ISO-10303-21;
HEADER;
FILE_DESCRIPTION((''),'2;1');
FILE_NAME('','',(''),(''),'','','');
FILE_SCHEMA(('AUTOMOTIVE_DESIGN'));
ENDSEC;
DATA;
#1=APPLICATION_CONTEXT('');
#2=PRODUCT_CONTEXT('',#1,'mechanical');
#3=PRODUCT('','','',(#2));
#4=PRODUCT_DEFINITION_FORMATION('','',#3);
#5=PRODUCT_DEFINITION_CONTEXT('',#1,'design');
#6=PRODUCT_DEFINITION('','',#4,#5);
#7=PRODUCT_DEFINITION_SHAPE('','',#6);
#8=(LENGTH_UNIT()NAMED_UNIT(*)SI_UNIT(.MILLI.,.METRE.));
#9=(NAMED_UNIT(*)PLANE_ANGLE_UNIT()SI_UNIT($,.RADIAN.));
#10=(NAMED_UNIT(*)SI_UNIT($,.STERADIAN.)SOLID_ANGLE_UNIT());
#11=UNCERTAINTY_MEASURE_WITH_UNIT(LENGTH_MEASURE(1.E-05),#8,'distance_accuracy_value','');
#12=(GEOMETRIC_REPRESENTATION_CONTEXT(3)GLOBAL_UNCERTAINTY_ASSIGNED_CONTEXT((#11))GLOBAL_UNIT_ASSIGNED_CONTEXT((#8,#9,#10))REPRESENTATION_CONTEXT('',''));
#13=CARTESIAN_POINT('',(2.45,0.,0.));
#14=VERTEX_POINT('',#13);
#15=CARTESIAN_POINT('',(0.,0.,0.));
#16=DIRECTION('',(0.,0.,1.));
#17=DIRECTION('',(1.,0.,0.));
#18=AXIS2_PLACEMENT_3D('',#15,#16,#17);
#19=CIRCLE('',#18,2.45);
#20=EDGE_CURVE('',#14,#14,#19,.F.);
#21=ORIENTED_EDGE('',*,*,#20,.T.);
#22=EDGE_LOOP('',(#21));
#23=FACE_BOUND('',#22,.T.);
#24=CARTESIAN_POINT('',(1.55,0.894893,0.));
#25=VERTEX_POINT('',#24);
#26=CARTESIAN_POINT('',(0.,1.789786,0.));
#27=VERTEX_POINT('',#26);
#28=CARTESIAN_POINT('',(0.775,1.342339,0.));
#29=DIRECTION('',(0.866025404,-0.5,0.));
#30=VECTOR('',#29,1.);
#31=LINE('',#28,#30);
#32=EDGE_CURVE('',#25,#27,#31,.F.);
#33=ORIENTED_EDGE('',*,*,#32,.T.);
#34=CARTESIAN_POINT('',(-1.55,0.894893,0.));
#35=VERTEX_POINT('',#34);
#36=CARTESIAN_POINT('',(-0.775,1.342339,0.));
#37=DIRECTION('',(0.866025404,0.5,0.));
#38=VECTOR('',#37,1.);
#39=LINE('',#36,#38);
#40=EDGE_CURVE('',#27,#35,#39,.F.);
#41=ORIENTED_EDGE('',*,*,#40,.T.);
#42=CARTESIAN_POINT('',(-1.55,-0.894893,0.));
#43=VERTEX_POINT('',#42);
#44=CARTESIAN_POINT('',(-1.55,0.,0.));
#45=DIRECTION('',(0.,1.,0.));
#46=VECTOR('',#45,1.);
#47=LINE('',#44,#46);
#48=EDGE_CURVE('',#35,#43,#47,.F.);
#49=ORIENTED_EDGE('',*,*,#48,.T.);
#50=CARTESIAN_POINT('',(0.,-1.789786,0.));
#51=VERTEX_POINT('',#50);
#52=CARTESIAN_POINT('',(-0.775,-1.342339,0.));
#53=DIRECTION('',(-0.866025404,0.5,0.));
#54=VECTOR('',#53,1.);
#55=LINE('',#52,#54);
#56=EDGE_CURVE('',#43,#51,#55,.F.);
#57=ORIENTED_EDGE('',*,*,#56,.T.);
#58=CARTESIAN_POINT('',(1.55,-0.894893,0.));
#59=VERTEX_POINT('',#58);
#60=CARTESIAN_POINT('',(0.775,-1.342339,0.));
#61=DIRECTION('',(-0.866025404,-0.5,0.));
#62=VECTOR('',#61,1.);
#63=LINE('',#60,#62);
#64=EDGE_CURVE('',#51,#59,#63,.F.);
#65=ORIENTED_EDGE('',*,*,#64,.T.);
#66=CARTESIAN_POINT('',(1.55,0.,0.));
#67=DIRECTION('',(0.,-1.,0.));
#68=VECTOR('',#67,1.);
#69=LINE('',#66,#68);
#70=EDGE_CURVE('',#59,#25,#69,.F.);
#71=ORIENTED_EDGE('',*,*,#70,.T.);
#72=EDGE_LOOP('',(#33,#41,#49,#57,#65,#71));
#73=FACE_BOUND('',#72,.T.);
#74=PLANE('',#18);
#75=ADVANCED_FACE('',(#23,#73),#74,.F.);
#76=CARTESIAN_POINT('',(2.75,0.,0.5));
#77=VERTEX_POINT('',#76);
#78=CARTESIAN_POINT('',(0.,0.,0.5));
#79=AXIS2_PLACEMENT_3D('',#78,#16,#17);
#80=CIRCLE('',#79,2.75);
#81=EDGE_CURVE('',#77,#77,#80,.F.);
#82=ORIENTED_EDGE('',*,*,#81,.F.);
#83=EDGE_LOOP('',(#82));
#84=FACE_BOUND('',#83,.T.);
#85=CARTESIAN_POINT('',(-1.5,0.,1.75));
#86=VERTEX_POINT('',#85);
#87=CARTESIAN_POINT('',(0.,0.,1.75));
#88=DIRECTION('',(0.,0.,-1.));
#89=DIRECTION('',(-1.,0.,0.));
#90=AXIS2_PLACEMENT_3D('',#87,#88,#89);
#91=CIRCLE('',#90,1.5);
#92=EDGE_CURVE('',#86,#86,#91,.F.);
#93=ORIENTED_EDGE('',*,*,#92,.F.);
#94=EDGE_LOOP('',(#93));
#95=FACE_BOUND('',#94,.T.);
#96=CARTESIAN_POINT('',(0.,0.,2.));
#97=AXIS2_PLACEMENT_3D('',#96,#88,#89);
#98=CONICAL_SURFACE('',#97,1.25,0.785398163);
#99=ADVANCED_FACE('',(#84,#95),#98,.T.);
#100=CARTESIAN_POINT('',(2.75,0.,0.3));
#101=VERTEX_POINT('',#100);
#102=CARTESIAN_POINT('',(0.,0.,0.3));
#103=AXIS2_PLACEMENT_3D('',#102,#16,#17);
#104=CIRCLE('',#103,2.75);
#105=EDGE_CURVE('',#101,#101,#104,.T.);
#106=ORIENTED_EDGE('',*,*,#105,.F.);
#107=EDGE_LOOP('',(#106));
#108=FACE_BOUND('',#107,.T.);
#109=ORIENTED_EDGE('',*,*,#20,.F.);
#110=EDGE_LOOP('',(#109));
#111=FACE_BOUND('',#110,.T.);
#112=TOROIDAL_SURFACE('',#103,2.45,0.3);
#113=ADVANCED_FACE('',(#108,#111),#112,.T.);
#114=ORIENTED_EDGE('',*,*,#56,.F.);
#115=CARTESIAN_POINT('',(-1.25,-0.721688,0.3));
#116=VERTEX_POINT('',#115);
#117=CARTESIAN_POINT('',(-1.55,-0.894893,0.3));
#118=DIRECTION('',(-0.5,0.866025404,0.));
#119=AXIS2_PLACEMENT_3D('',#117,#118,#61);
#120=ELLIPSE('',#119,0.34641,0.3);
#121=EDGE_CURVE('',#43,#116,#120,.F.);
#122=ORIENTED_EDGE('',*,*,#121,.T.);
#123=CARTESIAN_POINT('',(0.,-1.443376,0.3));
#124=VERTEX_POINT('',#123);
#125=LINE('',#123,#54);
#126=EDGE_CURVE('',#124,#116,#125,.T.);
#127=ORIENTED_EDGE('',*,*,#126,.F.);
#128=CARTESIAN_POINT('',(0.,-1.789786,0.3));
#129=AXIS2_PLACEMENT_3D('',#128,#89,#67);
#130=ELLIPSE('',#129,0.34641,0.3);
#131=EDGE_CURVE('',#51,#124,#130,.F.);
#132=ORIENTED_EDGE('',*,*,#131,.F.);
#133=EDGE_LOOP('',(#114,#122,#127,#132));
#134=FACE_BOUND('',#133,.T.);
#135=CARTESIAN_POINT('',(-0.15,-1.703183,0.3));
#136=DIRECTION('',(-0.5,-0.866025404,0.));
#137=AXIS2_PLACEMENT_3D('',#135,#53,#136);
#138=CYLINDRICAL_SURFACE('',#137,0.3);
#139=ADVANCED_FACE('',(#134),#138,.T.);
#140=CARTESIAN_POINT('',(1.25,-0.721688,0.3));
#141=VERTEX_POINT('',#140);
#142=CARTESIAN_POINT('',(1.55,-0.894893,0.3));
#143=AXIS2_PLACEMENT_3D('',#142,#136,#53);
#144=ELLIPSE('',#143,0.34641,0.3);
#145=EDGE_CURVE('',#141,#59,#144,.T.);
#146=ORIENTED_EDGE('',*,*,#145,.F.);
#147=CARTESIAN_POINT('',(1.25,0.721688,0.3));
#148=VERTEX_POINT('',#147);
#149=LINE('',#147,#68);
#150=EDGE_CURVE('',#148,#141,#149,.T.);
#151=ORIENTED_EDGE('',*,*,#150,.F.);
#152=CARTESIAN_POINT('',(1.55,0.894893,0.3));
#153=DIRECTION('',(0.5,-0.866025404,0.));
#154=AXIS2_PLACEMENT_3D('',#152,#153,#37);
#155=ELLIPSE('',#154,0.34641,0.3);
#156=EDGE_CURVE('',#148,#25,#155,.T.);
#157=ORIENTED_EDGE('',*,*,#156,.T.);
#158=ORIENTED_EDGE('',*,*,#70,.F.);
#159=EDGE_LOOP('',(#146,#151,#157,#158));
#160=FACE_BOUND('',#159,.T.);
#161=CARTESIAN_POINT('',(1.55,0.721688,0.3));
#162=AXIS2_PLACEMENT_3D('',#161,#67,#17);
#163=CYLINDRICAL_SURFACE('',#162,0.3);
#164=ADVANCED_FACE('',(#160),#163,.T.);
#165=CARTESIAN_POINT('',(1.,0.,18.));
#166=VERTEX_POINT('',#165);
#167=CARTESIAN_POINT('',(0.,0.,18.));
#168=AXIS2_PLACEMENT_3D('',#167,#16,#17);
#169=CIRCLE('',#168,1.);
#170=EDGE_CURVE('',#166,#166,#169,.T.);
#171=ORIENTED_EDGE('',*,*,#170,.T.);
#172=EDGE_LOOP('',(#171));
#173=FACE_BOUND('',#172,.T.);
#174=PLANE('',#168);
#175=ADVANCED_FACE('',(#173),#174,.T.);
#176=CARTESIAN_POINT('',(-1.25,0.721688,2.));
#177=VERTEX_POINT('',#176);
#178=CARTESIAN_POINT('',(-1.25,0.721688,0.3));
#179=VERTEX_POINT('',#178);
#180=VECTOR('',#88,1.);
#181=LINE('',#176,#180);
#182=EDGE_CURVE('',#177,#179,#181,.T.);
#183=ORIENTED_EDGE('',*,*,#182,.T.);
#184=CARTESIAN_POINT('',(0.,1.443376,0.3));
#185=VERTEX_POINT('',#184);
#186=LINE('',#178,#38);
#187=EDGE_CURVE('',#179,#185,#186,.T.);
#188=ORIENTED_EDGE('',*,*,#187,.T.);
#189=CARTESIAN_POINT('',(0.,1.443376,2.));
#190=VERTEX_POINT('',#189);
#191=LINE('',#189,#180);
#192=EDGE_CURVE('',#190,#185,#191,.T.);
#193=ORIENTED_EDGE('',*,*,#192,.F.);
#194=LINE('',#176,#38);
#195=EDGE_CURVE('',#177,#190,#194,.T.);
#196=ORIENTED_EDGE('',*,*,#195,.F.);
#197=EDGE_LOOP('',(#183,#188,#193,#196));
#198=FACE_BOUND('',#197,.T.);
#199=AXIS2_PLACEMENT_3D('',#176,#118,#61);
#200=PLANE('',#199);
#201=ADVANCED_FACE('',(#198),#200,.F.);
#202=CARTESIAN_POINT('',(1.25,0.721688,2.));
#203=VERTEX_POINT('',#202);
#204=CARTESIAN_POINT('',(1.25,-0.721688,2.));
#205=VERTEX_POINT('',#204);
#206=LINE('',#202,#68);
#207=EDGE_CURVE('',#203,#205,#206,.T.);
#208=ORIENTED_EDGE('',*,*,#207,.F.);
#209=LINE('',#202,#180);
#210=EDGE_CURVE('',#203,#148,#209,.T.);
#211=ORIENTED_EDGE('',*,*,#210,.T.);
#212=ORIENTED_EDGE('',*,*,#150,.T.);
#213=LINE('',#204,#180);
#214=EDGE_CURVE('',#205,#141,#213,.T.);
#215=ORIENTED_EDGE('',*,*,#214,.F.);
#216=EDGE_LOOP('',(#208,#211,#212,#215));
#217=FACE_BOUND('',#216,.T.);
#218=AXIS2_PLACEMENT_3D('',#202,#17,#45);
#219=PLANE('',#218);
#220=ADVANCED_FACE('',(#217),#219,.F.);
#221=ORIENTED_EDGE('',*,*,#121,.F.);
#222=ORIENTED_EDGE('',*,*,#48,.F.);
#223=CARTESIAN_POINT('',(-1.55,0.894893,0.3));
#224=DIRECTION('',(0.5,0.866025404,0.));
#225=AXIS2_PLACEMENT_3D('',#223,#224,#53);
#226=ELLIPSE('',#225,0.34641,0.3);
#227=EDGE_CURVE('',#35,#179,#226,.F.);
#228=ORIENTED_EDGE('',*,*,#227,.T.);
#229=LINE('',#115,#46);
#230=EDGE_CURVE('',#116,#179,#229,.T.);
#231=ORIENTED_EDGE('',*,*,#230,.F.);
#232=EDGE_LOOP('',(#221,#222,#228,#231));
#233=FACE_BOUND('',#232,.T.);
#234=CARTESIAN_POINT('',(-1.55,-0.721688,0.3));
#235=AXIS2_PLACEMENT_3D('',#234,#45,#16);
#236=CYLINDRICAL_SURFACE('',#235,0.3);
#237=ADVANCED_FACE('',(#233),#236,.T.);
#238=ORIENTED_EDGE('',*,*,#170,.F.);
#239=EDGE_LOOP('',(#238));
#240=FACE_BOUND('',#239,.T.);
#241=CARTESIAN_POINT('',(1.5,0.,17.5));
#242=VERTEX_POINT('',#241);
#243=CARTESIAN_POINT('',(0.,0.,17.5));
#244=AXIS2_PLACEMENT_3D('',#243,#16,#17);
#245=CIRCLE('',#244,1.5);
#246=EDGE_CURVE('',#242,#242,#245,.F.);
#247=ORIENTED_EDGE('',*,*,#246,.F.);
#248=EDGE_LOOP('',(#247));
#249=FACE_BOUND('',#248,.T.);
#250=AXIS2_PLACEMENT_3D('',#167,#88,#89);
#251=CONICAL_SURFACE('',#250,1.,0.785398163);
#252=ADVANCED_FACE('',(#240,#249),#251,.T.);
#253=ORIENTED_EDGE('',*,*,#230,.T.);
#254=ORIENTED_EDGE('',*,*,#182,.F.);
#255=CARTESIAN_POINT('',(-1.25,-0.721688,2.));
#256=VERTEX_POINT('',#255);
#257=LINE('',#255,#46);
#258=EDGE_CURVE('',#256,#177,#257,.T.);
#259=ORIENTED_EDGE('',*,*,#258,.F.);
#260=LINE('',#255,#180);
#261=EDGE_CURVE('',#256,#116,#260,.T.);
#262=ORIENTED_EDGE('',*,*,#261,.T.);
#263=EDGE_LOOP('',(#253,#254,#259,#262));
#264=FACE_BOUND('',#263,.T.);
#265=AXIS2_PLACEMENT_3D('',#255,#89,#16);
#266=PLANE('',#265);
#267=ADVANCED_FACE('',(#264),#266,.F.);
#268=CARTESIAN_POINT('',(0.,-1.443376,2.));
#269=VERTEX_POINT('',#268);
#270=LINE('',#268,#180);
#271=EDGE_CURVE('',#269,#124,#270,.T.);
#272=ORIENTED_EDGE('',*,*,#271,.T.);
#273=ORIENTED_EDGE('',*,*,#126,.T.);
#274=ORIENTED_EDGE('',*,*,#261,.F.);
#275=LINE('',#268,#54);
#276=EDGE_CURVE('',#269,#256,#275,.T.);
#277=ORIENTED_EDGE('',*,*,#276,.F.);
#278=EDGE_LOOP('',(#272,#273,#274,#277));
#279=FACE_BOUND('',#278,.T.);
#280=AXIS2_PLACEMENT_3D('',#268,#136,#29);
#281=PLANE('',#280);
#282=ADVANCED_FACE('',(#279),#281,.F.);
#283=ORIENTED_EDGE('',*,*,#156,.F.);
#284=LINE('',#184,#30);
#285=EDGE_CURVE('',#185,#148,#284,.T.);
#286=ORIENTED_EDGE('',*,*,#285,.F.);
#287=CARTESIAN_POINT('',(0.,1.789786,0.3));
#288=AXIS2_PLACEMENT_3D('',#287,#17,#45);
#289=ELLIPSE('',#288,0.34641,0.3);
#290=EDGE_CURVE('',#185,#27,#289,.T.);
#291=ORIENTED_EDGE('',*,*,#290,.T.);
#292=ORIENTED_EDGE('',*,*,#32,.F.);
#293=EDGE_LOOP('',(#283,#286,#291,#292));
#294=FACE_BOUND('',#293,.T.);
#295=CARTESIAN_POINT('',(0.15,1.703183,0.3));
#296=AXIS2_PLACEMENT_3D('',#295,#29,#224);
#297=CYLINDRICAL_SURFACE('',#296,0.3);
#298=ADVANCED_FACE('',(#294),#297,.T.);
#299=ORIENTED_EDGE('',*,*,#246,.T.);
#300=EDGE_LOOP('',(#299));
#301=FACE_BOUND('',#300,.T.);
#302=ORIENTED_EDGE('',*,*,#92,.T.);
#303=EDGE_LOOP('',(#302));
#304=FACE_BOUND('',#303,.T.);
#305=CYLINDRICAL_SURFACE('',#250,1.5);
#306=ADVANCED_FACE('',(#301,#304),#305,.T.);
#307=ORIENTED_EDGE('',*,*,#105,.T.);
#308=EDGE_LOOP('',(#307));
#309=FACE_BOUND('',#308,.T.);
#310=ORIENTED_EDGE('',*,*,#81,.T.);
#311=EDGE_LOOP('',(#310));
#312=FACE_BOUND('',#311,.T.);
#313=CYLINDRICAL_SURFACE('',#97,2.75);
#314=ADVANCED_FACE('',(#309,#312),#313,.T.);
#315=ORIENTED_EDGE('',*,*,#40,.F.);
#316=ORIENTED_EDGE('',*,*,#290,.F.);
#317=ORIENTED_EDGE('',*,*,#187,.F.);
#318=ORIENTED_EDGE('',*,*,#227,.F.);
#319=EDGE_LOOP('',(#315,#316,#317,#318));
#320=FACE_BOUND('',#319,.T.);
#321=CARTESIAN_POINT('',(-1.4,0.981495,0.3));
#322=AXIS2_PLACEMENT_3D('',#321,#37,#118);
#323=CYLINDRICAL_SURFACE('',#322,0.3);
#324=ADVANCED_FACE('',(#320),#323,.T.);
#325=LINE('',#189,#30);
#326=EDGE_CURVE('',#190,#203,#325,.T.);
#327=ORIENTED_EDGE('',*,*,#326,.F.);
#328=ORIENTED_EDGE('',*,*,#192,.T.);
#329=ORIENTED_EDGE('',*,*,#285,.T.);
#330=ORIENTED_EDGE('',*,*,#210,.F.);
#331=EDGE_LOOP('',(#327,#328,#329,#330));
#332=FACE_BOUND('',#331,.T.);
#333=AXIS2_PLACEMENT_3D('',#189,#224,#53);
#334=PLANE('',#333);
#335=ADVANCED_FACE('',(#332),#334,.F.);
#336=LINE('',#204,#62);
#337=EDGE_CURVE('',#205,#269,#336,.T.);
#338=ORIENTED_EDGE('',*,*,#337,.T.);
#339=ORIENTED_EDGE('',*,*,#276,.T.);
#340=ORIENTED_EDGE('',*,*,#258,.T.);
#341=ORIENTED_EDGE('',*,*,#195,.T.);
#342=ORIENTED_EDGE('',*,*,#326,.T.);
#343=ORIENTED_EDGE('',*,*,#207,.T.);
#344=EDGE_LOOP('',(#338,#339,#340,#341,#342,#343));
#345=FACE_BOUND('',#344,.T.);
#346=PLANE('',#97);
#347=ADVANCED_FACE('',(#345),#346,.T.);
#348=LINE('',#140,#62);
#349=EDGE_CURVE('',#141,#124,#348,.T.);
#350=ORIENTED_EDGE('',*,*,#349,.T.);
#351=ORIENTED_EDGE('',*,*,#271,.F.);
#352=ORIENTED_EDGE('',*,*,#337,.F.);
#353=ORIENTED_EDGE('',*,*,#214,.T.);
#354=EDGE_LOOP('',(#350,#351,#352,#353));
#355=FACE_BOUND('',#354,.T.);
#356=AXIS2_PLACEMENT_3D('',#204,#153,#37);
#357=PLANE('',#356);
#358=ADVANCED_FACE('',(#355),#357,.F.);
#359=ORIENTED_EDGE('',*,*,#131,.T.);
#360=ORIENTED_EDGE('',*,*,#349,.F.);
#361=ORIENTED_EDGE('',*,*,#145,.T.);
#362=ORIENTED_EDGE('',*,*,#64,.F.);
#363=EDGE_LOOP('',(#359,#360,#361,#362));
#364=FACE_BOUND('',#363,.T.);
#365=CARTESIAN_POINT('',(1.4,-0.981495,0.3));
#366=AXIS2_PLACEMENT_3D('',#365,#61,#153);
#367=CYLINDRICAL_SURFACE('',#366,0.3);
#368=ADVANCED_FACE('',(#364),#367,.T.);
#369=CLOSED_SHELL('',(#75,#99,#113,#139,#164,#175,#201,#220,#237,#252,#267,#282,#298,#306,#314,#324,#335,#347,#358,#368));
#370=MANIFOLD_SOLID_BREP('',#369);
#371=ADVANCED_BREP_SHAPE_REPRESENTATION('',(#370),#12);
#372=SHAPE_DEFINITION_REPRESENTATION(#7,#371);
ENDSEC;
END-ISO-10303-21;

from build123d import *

# Parameters (mm, degrees)
SKETCH1_R           = 2.75
BOSS_EXTRUDE1_DEPTH = 2
SKETCH2_R           = 1.5
BOSS_EXTRUDE2_DEPTH = 16
CHAMFER1_SIZE       = 1.5
FILLET1_R           = 0.3
CHAMFER2_SIZE       = 0.5
CUT_EXTRUDE1_DEPTH  = 2
FILLET2_R           = 0.3


with BuildPart() as part:
    # Sketch1 → Boss-Extrude1 (new body)
    with BuildSketch(Plane.XY):
        Circle(SKETCH1_R)
    extrude(amount=BOSS_EXTRUDE1_DEPTH)

    # Sketch2 → Boss-Extrude2 (add)
    with BuildSketch(Plane.XY.offset(2)):
        Circle(SKETCH2_R)
    extrude(amount=BOSS_EXTRUDE2_DEPTH)

    # Chamfer1
    # the kernel refuses this chamfer: 1.5 mm, written as the material it takes off along each edge
    with BuildSketch(Plane(origin=(0, 0, 2), x_dir=(1, 0, 0), z_dir=(0, -1, 0))) as chamfer1_piece_1_section:
        Polygon((2.75, -CHAMFER1_SIZE), (2.75 - CHAMFER1_SIZE, 0), (2.75, 0), align=None)
    chamfer1_piece_1 = revolve(axis=Axis((0, 0, 2), (0, 0, 1)), mode=Mode.PRIVATE)
    chamfer1_piece_1 = chamfer1_piece_1 - Plane(origin=(0, 0, 1.122011251), x_dir=(1, 0, 0), z_dir=(0, 0, -1)) * Cylinder(1.5, 11, mode=Mode.PRIVATE)
    add(chamfer1_piece_1, mode=Mode.SUBTRACT)

    # Fillet1
    fillet1_edges = [part.edges().sort_by_distance(p)[0] for p in [
        (-2.75, 0, 0),
    ]]
    fillet(fillet1_edges, radius=FILLET1_R)

    # Chamfer2
    chamfer2_edges = [part.edges().sort_by_distance(p)[0] for p in [
        (-1.5, 0, 18),
    ]]
    chamfer(chamfer2_edges, length=CHAMFER2_SIZE)

    # Sketch3 → Cut-Extrude1 (cut)
    with BuildSketch(Plane(origin=(0, 0, 0), x_dir=(-1, 0, 0), z_dir=(0, 0, -1))):
        Polygon((0, -1.443375673), (1.25, -0.721687836), (1.25, 0.721687836), (0, 1.443375673), (-1.25, 0.721687836), (-1.25, -0.721687836), align=None)
    extrude(amount=-CUT_EXTRUDE1_DEPTH, mode=Mode.SUBTRACT)

    # Fillet2
    fillet2_edges = [part.edges().sort_by_distance(p)[0] for p in [
        (0.625, -1.082531755, 0),
        (-0.625, -1.082531755, 0),
        (-1.25, 0, 0),
        (-0.625, 1.082531755, 0),
        (0.625, 1.082531755, 0),
        (1.25, 0, 0),
    ]]
    fillet(fillet2_edges, radius=FILLET2_R)


solid = part.part
